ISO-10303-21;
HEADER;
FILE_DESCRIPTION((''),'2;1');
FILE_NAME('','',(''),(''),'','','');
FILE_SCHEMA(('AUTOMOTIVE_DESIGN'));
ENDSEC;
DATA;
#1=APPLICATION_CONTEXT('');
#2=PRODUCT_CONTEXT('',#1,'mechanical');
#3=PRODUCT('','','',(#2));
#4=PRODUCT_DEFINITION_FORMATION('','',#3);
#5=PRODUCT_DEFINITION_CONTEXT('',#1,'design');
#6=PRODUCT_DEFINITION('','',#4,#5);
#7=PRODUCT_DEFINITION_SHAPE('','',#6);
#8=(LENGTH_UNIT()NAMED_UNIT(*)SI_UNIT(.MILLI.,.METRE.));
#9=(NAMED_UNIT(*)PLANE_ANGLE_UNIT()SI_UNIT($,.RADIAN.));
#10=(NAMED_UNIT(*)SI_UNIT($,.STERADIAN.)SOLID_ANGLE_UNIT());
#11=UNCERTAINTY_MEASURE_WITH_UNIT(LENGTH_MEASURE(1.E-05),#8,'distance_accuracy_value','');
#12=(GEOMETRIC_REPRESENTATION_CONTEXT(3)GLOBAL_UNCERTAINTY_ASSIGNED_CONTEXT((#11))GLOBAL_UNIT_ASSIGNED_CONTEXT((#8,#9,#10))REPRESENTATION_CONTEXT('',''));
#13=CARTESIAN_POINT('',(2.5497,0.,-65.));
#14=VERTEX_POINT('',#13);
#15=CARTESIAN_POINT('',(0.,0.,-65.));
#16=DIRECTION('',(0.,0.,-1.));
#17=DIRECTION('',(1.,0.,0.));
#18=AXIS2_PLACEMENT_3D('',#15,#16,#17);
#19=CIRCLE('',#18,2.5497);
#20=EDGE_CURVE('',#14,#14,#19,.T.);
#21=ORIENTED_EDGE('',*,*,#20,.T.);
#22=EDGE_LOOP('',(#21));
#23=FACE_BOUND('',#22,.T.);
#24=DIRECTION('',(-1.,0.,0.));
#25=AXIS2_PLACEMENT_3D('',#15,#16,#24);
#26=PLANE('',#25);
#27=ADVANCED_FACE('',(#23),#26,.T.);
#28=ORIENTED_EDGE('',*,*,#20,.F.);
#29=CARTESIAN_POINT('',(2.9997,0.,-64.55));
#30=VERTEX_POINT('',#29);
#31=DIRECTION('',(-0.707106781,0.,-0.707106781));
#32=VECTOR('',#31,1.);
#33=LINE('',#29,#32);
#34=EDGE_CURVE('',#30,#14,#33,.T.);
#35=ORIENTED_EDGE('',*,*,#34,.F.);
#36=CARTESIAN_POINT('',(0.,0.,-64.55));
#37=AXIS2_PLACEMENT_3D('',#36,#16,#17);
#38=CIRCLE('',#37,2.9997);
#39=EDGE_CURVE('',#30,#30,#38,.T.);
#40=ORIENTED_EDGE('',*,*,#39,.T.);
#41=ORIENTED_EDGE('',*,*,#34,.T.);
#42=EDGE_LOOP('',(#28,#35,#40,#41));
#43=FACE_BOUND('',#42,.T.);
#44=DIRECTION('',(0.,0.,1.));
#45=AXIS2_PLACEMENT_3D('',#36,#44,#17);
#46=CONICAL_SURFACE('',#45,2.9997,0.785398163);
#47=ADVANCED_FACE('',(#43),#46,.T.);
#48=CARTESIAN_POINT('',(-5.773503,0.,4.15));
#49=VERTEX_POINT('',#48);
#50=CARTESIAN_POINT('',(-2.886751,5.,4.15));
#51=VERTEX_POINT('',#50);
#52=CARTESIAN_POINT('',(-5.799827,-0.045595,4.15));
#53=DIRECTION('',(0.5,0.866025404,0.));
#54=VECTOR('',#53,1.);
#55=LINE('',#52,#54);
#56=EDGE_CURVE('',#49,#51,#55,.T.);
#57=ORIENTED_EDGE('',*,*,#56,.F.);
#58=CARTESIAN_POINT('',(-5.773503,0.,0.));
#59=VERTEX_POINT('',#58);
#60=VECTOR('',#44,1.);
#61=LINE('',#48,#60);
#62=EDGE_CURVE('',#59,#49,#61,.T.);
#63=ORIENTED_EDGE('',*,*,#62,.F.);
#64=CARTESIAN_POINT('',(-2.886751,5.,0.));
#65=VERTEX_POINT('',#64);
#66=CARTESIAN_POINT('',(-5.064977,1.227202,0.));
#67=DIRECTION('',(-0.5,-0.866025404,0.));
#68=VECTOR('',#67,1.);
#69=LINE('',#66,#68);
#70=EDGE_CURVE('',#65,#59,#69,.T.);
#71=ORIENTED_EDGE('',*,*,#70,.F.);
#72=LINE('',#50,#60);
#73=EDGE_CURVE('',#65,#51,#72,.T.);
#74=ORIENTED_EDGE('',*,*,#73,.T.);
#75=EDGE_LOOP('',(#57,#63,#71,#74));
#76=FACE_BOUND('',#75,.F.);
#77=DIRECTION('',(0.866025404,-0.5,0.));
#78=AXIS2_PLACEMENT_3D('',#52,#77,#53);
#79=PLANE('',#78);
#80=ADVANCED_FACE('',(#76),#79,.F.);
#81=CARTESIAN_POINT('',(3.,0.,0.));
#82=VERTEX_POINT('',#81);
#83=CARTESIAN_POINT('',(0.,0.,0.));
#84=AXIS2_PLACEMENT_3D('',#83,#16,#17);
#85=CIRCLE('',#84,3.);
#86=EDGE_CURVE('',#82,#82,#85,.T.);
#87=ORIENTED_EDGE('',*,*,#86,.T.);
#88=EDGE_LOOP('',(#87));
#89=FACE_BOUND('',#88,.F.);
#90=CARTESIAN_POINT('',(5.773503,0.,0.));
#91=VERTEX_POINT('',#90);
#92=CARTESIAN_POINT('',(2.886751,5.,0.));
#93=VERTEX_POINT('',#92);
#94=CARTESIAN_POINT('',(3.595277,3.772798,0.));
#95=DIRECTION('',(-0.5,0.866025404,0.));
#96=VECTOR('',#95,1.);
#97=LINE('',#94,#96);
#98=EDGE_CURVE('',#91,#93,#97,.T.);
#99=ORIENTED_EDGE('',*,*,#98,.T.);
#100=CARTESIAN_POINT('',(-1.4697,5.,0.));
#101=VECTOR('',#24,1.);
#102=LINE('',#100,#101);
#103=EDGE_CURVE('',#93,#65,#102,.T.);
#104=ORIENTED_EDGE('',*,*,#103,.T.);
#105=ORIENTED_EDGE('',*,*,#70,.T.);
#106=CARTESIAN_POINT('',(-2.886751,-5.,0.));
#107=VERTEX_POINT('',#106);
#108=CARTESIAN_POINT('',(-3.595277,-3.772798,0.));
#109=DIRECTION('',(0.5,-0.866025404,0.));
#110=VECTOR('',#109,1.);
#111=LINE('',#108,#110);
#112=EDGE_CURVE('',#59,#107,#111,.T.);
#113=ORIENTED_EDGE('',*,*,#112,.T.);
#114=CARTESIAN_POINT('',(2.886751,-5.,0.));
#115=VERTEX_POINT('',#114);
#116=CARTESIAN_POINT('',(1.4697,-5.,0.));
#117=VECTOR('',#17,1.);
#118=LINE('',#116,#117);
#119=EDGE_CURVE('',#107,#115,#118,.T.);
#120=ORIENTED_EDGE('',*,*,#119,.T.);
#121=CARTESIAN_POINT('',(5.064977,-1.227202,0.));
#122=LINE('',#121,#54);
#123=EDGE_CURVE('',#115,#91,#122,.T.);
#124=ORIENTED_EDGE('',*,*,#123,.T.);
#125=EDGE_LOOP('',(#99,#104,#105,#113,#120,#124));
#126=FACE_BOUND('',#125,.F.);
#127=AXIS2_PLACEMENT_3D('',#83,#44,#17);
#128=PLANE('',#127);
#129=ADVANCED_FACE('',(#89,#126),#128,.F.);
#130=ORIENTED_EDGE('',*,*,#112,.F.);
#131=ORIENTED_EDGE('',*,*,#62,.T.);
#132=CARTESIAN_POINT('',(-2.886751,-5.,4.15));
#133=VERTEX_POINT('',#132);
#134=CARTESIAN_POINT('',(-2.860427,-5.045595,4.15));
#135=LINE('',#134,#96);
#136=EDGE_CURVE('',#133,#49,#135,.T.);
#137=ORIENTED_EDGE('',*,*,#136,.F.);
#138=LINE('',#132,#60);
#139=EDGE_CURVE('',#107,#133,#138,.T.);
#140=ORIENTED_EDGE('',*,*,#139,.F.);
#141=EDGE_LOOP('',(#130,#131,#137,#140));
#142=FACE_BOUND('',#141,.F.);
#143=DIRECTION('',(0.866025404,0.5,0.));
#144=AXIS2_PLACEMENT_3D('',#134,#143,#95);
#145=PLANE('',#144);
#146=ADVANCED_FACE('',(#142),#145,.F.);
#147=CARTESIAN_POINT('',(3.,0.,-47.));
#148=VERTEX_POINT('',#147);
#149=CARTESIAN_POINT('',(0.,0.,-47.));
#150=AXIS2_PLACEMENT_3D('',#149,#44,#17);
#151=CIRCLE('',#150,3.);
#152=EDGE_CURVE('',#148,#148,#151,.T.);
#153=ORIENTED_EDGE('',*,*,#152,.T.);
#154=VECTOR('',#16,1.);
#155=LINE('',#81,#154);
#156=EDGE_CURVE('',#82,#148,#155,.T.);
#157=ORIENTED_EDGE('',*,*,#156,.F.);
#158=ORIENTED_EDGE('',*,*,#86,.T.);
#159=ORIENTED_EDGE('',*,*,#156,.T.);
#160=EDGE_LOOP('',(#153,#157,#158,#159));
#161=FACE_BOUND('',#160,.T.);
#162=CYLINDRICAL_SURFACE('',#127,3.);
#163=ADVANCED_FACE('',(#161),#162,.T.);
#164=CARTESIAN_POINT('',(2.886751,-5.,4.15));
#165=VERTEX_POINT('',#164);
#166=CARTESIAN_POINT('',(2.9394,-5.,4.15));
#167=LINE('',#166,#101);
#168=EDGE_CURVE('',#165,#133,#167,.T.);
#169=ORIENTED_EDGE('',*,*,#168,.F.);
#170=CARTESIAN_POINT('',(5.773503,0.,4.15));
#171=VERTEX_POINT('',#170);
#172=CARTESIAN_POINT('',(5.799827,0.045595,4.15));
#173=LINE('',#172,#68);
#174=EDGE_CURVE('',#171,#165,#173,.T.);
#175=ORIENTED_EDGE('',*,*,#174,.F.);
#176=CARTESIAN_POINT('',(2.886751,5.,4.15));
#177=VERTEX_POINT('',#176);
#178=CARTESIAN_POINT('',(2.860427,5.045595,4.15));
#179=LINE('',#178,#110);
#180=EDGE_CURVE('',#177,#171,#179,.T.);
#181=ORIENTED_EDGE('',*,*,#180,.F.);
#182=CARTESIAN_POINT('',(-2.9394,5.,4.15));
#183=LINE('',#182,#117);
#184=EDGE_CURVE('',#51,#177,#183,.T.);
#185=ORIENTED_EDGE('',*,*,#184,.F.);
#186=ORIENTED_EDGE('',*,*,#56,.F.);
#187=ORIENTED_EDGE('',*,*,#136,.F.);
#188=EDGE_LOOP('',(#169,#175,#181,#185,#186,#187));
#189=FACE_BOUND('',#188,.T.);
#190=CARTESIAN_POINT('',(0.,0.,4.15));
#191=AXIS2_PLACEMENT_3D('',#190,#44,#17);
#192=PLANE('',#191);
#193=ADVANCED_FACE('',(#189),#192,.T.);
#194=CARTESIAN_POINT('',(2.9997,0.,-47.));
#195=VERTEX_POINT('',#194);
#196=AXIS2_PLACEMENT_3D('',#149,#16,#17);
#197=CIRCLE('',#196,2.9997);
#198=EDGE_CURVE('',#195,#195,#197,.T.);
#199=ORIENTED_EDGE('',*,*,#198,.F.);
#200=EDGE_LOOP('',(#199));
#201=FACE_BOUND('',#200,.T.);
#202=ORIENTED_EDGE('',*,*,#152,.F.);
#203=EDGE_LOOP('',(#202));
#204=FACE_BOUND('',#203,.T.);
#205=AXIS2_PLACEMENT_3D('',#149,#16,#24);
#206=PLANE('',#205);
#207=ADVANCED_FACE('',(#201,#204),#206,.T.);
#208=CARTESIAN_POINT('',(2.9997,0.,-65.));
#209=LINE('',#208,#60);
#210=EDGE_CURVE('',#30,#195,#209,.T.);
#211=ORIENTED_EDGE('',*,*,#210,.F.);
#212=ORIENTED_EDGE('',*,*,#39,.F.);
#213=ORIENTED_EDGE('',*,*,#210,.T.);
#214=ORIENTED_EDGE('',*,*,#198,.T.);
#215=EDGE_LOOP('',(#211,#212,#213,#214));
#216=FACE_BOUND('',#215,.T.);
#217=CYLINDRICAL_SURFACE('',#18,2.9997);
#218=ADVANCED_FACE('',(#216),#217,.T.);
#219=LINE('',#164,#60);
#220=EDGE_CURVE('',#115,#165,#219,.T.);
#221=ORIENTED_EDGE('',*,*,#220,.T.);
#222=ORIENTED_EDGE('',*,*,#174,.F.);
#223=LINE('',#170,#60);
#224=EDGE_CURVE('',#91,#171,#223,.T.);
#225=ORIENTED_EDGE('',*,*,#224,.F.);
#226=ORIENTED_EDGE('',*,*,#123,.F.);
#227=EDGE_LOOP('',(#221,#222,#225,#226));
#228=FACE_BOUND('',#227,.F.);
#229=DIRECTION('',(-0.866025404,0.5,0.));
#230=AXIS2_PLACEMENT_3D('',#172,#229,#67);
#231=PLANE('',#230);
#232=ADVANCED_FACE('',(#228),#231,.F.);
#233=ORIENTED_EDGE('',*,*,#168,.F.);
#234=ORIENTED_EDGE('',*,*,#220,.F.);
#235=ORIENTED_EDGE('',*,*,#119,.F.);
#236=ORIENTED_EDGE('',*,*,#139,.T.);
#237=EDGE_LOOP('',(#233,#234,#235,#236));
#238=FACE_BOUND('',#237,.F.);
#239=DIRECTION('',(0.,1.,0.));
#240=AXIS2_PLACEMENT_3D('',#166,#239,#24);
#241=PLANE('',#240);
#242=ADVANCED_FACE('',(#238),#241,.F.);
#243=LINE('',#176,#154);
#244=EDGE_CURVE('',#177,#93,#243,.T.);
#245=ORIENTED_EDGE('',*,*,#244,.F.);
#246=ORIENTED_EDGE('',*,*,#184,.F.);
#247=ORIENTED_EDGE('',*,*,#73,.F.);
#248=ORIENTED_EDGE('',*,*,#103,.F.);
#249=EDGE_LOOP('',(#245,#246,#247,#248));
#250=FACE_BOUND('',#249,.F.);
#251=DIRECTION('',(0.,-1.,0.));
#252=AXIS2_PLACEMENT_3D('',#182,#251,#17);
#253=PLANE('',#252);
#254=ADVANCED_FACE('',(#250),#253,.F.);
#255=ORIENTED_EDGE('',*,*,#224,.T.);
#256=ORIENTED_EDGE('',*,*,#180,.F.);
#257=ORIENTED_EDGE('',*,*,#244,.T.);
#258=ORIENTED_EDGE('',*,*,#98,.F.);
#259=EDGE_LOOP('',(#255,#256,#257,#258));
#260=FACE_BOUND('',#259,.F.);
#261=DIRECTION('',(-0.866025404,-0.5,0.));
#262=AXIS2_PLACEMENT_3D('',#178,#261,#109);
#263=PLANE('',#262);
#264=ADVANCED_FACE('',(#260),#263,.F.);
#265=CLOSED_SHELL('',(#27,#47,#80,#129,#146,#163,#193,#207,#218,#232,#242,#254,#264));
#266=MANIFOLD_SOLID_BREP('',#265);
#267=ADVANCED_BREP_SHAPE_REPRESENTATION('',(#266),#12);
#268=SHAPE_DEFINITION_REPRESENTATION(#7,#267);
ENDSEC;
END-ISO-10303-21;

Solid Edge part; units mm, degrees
sketch "Sketch1" plane through (0, 0, 0) normal (0, 0, 1) x (1, 0, 0)
  circle A0 centre (0, 0) radius 5.8
  dimension "D1" = 11.6
extrude "Protrusion1" add sketch "Sketch1" along normal blind 4.15
sketch "Sketch2" plane through (0, 0, 0) normal (0, 0, -1) x (1, 0, 0)
  circle A0 centre (0, 0) radius 3
extrude "Protrusion2" add sketch "Sketch2" along normal blind 65
sketch "Sketch3" plane through (0, 0, -65) normal (0, 0, -1) x (1, 0, 0)
  circle A0 centre (0, 0) radius 2.9997
extrude "Cutout1" cut sketch "Sketch3" against normal blind 18 flip side to cut
chamfer "Chamfer_1" distance 0.45 angle 45 1 edges at (-2.9997, 0, -65)
sketch "Sketch4" plane through (0, 0, 4.15) normal (0, 0, 1) x (1, 0, 0)
  line L0 (-2.9394, 5) -> (2.9394, 5)
  dimension "D1" = 10
extrude "Cutout2" cut sketch "Sketch4" against normal up to next material side at (0, 5.05, 4.15)
pattern_circular "Pattern1" count 6 over 360 about axis through (0, 0, 4.15) along (0, 0, 1) of "Cutout2"
properties part number "24104502"
